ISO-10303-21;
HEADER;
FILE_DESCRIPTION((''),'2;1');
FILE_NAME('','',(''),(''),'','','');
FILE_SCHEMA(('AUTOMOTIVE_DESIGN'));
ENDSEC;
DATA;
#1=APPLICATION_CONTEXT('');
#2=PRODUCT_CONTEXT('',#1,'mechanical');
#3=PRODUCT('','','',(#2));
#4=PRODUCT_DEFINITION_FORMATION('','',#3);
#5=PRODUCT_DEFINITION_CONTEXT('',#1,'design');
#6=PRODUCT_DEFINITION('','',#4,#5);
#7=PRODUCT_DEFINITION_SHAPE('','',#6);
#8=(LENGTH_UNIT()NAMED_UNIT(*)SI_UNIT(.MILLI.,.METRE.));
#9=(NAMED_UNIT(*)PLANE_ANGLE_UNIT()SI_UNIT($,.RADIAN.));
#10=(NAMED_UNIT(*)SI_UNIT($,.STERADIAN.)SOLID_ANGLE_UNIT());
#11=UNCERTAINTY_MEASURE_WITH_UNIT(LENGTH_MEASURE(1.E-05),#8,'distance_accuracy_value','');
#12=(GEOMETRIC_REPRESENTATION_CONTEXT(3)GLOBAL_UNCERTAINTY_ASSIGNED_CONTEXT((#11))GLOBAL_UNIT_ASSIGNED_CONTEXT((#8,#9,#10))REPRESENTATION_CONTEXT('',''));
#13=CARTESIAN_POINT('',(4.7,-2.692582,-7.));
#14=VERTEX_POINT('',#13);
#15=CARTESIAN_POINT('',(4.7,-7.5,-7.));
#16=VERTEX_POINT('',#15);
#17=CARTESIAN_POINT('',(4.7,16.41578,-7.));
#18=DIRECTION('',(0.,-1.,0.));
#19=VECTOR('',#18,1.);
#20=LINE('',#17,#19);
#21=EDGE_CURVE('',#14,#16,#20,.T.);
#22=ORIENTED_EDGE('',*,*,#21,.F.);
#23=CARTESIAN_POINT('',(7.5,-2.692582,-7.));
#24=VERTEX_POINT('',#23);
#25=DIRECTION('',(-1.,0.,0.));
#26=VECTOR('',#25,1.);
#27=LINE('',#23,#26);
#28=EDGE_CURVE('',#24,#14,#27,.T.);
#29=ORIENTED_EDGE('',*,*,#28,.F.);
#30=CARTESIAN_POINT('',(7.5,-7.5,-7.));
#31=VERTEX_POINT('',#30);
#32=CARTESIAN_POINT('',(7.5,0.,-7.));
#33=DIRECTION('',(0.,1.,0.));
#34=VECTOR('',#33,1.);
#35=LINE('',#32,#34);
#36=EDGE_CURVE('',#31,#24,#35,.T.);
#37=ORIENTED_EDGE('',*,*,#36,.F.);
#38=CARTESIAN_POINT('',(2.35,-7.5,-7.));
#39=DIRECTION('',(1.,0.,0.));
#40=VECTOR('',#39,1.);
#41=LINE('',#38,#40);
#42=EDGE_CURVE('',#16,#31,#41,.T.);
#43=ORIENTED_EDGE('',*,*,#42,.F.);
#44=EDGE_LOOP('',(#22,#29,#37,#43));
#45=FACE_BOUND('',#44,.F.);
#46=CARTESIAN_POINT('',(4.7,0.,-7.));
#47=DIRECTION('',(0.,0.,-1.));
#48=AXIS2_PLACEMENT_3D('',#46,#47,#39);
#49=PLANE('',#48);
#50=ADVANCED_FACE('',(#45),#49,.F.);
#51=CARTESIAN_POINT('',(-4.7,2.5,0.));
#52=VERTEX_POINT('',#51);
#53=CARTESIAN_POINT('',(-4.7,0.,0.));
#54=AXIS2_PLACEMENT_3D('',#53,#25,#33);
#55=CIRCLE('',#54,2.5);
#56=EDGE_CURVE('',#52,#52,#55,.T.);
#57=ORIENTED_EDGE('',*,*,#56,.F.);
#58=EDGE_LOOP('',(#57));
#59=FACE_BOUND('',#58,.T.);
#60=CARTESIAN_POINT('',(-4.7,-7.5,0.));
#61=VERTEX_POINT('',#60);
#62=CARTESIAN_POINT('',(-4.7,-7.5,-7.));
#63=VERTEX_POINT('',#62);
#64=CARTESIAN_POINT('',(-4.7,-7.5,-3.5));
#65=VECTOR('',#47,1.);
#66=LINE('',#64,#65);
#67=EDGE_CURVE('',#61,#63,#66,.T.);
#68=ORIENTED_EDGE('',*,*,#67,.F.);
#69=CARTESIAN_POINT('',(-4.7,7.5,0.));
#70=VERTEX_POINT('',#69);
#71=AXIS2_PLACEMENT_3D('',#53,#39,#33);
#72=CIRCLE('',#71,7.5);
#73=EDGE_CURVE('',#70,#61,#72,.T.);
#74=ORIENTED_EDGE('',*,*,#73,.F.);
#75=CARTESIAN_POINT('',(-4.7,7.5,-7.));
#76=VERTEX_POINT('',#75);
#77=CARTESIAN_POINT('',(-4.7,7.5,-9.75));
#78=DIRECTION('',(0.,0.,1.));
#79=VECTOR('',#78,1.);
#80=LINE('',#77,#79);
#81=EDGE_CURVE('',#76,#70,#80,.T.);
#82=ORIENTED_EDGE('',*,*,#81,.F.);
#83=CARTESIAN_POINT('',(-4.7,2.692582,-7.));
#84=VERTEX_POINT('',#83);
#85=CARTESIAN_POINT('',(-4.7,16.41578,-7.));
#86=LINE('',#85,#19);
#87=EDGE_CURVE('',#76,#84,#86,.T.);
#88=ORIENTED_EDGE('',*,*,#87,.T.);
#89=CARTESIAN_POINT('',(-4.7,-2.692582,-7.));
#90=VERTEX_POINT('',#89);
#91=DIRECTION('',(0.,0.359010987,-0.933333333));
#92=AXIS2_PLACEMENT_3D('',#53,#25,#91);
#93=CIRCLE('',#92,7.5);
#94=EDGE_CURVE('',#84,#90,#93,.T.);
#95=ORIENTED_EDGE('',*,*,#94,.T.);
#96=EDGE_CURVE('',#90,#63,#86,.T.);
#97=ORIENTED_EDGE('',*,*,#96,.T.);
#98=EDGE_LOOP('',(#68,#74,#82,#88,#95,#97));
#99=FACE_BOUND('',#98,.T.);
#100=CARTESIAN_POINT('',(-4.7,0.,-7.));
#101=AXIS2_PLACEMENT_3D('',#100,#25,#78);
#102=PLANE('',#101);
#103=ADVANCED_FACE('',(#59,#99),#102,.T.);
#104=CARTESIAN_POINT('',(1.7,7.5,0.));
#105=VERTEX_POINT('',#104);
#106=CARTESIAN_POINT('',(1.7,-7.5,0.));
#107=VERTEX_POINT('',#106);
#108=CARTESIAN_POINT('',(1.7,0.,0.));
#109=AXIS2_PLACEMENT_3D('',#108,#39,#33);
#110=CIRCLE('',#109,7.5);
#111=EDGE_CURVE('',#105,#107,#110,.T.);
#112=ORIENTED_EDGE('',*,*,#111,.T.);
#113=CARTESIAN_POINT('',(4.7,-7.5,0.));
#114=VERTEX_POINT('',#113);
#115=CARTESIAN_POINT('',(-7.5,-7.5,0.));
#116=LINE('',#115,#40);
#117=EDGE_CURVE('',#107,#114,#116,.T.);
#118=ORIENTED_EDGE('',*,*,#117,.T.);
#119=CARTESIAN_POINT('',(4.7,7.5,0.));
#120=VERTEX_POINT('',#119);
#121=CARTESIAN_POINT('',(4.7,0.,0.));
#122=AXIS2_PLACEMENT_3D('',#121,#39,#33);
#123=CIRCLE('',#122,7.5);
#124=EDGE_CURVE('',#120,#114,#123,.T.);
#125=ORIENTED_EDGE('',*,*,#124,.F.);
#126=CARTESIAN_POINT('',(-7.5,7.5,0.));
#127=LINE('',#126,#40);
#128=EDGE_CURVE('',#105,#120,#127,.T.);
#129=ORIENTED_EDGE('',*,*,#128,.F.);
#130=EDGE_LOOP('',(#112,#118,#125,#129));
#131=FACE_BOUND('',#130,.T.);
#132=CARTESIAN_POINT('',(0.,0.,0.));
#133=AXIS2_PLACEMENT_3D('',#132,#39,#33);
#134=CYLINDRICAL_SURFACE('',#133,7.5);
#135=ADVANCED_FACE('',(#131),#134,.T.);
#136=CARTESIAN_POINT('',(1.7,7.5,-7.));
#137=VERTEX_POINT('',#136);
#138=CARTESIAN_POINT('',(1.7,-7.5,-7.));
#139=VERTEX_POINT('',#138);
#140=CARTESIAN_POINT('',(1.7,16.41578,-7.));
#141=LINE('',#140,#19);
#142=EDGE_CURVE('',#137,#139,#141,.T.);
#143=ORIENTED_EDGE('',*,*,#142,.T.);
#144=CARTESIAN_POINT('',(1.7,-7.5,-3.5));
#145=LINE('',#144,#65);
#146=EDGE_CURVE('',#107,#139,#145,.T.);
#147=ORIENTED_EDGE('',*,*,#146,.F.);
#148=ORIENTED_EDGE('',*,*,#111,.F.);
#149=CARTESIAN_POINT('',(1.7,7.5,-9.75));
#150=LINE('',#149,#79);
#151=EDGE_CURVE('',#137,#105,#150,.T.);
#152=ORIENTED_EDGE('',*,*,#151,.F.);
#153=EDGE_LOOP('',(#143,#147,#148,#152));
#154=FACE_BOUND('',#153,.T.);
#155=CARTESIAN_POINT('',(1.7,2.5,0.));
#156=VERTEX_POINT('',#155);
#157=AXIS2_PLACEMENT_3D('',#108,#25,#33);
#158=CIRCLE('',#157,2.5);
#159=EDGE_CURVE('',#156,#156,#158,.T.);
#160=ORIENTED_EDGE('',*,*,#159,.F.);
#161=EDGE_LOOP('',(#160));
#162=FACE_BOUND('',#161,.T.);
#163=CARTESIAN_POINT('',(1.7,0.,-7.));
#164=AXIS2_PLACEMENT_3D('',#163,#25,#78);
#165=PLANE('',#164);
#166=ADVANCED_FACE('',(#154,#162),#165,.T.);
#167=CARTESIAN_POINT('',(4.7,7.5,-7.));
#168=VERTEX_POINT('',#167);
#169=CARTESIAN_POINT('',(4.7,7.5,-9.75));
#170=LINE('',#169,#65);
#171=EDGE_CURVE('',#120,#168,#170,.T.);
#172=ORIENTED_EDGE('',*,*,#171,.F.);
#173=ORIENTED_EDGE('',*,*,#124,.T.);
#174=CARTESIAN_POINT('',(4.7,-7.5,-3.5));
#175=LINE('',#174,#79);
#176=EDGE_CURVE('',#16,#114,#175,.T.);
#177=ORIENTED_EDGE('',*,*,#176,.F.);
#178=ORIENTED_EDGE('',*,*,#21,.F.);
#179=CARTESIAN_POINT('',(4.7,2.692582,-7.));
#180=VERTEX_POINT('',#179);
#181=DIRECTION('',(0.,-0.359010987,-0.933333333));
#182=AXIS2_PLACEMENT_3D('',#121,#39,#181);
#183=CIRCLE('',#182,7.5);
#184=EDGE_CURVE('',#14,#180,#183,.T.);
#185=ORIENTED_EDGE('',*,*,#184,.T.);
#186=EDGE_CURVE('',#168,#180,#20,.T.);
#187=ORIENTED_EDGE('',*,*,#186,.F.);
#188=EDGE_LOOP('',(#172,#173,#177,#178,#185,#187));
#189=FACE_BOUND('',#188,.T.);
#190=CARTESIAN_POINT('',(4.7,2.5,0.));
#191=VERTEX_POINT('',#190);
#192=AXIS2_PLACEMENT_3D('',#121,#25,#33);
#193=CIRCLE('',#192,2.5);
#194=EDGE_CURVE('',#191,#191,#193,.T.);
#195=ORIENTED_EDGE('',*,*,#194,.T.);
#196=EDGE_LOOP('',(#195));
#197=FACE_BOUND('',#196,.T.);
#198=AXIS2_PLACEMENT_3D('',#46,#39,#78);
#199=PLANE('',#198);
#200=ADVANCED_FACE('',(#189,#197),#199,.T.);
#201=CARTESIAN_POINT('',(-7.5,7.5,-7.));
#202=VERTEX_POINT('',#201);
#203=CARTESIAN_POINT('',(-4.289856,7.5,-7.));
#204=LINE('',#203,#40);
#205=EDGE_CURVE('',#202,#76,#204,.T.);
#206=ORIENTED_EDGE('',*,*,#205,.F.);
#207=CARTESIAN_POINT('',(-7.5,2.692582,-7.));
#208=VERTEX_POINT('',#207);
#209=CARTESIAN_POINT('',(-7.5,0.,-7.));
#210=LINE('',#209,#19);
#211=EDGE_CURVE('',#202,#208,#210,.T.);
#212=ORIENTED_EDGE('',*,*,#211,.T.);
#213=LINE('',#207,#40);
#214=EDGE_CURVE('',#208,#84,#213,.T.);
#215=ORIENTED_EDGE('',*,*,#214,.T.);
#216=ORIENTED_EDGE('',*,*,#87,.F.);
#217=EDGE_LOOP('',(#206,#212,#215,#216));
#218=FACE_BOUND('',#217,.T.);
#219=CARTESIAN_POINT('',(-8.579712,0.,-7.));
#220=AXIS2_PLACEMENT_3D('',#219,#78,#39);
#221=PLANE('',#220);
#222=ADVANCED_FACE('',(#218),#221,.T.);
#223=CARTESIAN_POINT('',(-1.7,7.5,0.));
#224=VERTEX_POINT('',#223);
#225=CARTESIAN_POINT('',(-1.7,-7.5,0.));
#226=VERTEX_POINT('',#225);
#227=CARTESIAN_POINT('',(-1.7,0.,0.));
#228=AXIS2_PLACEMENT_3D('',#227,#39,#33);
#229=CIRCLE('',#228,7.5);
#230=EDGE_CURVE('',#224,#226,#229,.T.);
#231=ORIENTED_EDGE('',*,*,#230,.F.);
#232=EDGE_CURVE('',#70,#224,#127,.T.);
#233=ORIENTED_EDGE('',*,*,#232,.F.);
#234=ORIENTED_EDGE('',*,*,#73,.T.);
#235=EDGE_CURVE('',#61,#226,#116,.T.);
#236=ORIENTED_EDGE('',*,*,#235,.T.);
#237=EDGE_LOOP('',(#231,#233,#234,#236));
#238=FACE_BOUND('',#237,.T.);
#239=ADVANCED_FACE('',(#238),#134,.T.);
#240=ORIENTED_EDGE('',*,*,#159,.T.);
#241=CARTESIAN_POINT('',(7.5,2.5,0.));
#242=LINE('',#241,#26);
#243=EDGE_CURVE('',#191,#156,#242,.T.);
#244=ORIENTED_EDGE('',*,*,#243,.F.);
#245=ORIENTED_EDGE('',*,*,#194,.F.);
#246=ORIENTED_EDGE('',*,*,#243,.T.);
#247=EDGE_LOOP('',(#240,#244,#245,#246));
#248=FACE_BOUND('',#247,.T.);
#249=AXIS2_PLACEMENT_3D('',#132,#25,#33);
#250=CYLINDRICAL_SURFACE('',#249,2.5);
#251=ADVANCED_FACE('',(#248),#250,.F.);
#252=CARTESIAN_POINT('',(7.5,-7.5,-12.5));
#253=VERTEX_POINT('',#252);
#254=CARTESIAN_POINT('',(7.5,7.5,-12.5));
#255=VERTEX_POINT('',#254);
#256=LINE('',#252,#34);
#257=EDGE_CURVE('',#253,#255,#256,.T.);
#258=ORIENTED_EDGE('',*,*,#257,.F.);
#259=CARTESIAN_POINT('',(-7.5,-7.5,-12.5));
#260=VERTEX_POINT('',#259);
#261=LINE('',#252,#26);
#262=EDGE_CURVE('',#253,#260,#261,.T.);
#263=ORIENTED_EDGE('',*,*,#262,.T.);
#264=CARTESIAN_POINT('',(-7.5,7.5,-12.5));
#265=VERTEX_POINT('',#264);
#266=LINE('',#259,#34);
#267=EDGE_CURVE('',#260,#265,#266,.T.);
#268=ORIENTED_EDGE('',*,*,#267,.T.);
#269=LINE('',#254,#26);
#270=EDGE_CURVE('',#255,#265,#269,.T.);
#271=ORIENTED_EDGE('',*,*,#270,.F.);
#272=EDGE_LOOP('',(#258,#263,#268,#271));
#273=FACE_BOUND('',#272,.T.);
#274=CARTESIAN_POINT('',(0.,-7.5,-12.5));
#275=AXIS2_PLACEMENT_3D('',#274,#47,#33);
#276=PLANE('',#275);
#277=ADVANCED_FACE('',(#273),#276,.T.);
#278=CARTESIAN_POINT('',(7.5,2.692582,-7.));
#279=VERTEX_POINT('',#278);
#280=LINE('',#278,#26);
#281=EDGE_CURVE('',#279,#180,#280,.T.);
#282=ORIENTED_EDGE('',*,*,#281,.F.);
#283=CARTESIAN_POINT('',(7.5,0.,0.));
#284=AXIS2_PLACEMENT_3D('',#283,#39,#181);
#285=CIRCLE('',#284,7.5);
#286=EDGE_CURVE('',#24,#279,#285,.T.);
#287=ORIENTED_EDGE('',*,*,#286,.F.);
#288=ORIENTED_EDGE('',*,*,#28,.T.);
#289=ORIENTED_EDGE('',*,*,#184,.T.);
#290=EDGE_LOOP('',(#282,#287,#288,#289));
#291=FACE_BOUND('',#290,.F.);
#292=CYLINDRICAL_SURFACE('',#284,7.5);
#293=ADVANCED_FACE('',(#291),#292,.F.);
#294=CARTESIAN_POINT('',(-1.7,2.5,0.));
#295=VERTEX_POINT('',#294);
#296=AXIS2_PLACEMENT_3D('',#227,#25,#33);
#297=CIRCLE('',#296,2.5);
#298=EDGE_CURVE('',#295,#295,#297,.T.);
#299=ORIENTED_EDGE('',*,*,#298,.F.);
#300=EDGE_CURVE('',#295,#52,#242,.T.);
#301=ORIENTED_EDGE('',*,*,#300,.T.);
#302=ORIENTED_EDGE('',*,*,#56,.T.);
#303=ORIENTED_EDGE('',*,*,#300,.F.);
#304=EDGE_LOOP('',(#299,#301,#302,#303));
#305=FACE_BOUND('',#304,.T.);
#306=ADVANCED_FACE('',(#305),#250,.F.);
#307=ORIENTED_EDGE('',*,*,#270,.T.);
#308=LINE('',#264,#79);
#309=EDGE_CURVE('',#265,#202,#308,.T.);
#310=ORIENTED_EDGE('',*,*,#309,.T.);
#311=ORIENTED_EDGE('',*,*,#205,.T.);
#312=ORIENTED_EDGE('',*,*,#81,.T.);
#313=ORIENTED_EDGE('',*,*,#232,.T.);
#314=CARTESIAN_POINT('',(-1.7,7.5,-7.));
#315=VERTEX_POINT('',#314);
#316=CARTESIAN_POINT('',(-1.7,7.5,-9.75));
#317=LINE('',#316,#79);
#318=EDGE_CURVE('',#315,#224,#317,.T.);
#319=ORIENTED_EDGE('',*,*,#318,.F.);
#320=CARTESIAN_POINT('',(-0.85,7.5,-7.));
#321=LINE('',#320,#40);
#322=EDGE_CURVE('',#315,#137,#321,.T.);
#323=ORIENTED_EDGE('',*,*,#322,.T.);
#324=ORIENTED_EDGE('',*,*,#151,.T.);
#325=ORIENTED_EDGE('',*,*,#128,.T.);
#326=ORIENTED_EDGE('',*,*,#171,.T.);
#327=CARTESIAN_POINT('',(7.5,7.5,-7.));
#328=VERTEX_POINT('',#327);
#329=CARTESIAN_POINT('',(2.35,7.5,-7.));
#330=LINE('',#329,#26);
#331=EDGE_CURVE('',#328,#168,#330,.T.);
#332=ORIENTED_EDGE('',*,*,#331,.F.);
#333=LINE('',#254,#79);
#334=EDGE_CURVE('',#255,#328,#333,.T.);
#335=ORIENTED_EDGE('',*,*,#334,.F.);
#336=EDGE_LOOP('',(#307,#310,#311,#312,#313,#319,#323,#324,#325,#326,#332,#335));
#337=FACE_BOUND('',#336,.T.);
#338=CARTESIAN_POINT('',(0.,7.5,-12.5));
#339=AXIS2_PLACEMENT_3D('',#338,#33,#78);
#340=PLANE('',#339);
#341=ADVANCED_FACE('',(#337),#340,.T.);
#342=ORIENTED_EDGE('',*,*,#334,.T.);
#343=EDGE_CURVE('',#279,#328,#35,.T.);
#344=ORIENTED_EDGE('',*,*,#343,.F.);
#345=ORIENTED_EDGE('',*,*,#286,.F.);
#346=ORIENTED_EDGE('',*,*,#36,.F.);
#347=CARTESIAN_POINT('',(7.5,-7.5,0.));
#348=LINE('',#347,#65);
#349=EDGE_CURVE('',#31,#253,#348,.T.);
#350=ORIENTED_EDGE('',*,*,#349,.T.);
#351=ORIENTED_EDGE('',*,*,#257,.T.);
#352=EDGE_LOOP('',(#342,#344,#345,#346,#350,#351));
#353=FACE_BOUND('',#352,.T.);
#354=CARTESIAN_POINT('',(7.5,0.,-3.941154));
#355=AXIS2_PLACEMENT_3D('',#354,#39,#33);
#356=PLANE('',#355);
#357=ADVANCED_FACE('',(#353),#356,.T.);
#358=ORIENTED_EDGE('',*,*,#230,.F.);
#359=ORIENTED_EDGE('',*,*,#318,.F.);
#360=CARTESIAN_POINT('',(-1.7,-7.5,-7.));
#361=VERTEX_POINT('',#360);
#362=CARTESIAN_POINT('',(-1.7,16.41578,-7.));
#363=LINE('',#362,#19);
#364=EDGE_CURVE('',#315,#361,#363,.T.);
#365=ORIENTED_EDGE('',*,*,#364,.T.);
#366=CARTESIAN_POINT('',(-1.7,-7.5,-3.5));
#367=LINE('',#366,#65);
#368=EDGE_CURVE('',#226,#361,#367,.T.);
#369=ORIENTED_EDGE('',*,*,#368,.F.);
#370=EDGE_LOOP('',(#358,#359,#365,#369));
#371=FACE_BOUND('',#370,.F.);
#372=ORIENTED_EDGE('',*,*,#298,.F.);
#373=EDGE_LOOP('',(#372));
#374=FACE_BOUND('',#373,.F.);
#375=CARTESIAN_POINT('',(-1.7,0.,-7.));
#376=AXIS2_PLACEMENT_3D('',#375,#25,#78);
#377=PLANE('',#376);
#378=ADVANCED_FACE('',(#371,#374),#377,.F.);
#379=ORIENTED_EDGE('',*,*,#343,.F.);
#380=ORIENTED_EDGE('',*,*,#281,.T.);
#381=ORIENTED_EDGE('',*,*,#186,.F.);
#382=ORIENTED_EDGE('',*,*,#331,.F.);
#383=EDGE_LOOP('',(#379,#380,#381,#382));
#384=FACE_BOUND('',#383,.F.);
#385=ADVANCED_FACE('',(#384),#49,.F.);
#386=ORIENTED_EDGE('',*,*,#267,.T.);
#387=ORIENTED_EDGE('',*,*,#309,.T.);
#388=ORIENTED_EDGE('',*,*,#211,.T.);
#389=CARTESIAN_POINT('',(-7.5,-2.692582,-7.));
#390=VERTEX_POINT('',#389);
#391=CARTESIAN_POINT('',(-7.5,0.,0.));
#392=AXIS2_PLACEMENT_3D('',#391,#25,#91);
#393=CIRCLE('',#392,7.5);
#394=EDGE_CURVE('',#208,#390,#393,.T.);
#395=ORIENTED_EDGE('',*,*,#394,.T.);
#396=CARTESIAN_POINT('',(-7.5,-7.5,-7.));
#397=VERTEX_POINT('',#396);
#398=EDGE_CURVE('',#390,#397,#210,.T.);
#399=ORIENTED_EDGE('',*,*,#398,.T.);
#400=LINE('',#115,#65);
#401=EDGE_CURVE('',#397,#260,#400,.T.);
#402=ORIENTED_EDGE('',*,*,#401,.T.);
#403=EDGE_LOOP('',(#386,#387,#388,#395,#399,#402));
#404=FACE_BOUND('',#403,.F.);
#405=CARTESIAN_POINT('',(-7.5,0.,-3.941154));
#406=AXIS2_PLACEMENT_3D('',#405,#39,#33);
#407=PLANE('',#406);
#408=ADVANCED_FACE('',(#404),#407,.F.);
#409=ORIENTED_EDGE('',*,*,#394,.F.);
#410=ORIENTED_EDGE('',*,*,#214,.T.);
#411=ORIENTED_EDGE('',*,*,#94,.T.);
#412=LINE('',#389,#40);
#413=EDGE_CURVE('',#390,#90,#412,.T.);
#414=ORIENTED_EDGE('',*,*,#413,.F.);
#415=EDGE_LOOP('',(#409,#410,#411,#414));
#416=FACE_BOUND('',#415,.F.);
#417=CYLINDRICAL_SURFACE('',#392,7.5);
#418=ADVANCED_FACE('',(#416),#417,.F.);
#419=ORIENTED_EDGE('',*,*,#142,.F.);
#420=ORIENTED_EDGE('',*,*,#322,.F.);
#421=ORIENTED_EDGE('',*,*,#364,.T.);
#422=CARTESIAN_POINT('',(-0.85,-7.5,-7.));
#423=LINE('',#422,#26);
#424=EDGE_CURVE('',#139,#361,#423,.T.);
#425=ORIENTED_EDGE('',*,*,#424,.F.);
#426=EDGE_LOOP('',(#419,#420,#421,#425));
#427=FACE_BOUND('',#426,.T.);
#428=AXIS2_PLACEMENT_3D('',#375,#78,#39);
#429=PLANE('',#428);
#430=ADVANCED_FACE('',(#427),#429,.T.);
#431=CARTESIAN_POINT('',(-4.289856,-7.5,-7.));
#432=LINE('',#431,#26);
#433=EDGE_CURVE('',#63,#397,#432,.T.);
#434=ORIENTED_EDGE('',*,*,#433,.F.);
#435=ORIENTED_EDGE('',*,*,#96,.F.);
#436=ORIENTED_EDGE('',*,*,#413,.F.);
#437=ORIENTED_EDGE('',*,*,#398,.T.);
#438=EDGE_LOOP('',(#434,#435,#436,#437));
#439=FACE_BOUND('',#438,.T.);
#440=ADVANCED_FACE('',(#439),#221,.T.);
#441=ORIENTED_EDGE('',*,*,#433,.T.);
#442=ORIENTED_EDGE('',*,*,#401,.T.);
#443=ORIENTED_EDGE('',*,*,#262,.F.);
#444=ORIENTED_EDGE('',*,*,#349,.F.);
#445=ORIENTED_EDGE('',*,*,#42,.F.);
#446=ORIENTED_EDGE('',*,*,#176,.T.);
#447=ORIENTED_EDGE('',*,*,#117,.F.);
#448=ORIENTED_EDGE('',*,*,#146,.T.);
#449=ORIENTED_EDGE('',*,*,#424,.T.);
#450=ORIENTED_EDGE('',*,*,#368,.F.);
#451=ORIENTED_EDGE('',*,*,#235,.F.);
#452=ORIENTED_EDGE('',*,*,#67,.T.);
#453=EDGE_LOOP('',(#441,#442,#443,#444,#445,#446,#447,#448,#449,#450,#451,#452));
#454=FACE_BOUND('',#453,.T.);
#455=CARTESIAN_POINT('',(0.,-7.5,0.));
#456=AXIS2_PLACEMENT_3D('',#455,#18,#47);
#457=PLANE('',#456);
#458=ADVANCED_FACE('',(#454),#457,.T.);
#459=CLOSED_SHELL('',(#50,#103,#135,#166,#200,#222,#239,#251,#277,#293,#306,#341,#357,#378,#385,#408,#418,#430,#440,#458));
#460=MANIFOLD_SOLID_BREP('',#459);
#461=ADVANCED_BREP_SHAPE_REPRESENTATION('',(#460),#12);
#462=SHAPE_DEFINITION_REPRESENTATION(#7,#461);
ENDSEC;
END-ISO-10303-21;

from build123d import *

# Parameters (mm, degrees)
F0_R     = 2.5
F1_DEPTH = 7.5
F2_W     = 3.4
F2_H     = 15.4505071864
F2_W_2   = 3.8797123611
F2_W_3   = 3.8316924378
F3_DEPTH = 16.41578
F5_DEPTH = 2.8
F7_DEPTH = 2.8


with BuildPart() as f1:
    # F0 (on Right) → F1 (new body, symmetric)
    with BuildSketch(Plane.YZ):
        with BuildLine():
            Line((7.5, -12.5), (7.5, 0))
            ThreePointArc((7.5, 0), (0, 7.5), (-7.5, 0))
            Line((-7.5, 0), (-7.5, -12.5))
            Line((-7.5, -12.5), (7.5, -12.5))
        make_face()
        Circle(F0_R, mode=Mode.SUBTRACT)
    extrude(amount=F1_DEPTH, both=True)

    # F2 (on Front) → F3 (cut, symmetric)
    with BuildSketch(Plane.XZ):
        with Locations((0, 0.7252535932)):
            Rectangle(F2_W, F2_H)
        with Locations((-6.6398561805, 0.7252535932)):
            Rectangle(F2_W_2, F2_H)
        with Locations((6.6158462189, 0.7252535932)):
            Rectangle(F2_W_3, F2_H)
    extrude(amount=F3_DEPTH, both=True, mode=Mode.SUBTRACT)

    # F4 (on face) → F5 (cut, through all)
    with BuildSketch(Plane(origin=(-7.5, 0, 0), x_dir=(0, -1, 0), z_dir=(-1, 0, 0))):
        with BuildLine():
            ThreePointArc((2.6925824036, -7), (6.1824092402, -4.2459175671), (7.5, 0))
            ThreePointArc((7.5, 0), (-4.2459175671, 6.1824092402), (-2.6925824036, -7))
            Line((-2.6925824036, -7), (2.6925824036, -7))
        make_face()
        with BuildLine():
            Line((2.6925824036, -7), (-2.6925824036, -7))
            ThreePointArc((-2.6925824036, -7), (0, -7.5), (2.6925824036, -7))
        make_face()
    extrude(amount=-F5_DEPTH, mode=Mode.SUBTRACT)

    # F6 (on face) → F7 (cut, through all)
    with BuildSketch(Plane.YZ.offset(7.5)):
        with BuildLine():
            Line((2.6925824036, -7), (-2.6925824036, -7))
            ThreePointArc((-2.6925824036, -7), (0, -7.5), (2.6925824036, -7))
        make_face()
        with BuildLine():
            ThreePointArc((2.6925824036, -7), (6.1824092402, -4.2459175671), (7.5, 0))
            ThreePointArc((7.5, 0), (-4.2459175671, 6.1824092402), (-2.6925824036, -7))
            Line((-2.6925824036, -7), (2.6925824036, -7))
        make_face()
    extrude(amount=-F7_DEPTH, mode=Mode.SUBTRACT)


solid = f1.part
